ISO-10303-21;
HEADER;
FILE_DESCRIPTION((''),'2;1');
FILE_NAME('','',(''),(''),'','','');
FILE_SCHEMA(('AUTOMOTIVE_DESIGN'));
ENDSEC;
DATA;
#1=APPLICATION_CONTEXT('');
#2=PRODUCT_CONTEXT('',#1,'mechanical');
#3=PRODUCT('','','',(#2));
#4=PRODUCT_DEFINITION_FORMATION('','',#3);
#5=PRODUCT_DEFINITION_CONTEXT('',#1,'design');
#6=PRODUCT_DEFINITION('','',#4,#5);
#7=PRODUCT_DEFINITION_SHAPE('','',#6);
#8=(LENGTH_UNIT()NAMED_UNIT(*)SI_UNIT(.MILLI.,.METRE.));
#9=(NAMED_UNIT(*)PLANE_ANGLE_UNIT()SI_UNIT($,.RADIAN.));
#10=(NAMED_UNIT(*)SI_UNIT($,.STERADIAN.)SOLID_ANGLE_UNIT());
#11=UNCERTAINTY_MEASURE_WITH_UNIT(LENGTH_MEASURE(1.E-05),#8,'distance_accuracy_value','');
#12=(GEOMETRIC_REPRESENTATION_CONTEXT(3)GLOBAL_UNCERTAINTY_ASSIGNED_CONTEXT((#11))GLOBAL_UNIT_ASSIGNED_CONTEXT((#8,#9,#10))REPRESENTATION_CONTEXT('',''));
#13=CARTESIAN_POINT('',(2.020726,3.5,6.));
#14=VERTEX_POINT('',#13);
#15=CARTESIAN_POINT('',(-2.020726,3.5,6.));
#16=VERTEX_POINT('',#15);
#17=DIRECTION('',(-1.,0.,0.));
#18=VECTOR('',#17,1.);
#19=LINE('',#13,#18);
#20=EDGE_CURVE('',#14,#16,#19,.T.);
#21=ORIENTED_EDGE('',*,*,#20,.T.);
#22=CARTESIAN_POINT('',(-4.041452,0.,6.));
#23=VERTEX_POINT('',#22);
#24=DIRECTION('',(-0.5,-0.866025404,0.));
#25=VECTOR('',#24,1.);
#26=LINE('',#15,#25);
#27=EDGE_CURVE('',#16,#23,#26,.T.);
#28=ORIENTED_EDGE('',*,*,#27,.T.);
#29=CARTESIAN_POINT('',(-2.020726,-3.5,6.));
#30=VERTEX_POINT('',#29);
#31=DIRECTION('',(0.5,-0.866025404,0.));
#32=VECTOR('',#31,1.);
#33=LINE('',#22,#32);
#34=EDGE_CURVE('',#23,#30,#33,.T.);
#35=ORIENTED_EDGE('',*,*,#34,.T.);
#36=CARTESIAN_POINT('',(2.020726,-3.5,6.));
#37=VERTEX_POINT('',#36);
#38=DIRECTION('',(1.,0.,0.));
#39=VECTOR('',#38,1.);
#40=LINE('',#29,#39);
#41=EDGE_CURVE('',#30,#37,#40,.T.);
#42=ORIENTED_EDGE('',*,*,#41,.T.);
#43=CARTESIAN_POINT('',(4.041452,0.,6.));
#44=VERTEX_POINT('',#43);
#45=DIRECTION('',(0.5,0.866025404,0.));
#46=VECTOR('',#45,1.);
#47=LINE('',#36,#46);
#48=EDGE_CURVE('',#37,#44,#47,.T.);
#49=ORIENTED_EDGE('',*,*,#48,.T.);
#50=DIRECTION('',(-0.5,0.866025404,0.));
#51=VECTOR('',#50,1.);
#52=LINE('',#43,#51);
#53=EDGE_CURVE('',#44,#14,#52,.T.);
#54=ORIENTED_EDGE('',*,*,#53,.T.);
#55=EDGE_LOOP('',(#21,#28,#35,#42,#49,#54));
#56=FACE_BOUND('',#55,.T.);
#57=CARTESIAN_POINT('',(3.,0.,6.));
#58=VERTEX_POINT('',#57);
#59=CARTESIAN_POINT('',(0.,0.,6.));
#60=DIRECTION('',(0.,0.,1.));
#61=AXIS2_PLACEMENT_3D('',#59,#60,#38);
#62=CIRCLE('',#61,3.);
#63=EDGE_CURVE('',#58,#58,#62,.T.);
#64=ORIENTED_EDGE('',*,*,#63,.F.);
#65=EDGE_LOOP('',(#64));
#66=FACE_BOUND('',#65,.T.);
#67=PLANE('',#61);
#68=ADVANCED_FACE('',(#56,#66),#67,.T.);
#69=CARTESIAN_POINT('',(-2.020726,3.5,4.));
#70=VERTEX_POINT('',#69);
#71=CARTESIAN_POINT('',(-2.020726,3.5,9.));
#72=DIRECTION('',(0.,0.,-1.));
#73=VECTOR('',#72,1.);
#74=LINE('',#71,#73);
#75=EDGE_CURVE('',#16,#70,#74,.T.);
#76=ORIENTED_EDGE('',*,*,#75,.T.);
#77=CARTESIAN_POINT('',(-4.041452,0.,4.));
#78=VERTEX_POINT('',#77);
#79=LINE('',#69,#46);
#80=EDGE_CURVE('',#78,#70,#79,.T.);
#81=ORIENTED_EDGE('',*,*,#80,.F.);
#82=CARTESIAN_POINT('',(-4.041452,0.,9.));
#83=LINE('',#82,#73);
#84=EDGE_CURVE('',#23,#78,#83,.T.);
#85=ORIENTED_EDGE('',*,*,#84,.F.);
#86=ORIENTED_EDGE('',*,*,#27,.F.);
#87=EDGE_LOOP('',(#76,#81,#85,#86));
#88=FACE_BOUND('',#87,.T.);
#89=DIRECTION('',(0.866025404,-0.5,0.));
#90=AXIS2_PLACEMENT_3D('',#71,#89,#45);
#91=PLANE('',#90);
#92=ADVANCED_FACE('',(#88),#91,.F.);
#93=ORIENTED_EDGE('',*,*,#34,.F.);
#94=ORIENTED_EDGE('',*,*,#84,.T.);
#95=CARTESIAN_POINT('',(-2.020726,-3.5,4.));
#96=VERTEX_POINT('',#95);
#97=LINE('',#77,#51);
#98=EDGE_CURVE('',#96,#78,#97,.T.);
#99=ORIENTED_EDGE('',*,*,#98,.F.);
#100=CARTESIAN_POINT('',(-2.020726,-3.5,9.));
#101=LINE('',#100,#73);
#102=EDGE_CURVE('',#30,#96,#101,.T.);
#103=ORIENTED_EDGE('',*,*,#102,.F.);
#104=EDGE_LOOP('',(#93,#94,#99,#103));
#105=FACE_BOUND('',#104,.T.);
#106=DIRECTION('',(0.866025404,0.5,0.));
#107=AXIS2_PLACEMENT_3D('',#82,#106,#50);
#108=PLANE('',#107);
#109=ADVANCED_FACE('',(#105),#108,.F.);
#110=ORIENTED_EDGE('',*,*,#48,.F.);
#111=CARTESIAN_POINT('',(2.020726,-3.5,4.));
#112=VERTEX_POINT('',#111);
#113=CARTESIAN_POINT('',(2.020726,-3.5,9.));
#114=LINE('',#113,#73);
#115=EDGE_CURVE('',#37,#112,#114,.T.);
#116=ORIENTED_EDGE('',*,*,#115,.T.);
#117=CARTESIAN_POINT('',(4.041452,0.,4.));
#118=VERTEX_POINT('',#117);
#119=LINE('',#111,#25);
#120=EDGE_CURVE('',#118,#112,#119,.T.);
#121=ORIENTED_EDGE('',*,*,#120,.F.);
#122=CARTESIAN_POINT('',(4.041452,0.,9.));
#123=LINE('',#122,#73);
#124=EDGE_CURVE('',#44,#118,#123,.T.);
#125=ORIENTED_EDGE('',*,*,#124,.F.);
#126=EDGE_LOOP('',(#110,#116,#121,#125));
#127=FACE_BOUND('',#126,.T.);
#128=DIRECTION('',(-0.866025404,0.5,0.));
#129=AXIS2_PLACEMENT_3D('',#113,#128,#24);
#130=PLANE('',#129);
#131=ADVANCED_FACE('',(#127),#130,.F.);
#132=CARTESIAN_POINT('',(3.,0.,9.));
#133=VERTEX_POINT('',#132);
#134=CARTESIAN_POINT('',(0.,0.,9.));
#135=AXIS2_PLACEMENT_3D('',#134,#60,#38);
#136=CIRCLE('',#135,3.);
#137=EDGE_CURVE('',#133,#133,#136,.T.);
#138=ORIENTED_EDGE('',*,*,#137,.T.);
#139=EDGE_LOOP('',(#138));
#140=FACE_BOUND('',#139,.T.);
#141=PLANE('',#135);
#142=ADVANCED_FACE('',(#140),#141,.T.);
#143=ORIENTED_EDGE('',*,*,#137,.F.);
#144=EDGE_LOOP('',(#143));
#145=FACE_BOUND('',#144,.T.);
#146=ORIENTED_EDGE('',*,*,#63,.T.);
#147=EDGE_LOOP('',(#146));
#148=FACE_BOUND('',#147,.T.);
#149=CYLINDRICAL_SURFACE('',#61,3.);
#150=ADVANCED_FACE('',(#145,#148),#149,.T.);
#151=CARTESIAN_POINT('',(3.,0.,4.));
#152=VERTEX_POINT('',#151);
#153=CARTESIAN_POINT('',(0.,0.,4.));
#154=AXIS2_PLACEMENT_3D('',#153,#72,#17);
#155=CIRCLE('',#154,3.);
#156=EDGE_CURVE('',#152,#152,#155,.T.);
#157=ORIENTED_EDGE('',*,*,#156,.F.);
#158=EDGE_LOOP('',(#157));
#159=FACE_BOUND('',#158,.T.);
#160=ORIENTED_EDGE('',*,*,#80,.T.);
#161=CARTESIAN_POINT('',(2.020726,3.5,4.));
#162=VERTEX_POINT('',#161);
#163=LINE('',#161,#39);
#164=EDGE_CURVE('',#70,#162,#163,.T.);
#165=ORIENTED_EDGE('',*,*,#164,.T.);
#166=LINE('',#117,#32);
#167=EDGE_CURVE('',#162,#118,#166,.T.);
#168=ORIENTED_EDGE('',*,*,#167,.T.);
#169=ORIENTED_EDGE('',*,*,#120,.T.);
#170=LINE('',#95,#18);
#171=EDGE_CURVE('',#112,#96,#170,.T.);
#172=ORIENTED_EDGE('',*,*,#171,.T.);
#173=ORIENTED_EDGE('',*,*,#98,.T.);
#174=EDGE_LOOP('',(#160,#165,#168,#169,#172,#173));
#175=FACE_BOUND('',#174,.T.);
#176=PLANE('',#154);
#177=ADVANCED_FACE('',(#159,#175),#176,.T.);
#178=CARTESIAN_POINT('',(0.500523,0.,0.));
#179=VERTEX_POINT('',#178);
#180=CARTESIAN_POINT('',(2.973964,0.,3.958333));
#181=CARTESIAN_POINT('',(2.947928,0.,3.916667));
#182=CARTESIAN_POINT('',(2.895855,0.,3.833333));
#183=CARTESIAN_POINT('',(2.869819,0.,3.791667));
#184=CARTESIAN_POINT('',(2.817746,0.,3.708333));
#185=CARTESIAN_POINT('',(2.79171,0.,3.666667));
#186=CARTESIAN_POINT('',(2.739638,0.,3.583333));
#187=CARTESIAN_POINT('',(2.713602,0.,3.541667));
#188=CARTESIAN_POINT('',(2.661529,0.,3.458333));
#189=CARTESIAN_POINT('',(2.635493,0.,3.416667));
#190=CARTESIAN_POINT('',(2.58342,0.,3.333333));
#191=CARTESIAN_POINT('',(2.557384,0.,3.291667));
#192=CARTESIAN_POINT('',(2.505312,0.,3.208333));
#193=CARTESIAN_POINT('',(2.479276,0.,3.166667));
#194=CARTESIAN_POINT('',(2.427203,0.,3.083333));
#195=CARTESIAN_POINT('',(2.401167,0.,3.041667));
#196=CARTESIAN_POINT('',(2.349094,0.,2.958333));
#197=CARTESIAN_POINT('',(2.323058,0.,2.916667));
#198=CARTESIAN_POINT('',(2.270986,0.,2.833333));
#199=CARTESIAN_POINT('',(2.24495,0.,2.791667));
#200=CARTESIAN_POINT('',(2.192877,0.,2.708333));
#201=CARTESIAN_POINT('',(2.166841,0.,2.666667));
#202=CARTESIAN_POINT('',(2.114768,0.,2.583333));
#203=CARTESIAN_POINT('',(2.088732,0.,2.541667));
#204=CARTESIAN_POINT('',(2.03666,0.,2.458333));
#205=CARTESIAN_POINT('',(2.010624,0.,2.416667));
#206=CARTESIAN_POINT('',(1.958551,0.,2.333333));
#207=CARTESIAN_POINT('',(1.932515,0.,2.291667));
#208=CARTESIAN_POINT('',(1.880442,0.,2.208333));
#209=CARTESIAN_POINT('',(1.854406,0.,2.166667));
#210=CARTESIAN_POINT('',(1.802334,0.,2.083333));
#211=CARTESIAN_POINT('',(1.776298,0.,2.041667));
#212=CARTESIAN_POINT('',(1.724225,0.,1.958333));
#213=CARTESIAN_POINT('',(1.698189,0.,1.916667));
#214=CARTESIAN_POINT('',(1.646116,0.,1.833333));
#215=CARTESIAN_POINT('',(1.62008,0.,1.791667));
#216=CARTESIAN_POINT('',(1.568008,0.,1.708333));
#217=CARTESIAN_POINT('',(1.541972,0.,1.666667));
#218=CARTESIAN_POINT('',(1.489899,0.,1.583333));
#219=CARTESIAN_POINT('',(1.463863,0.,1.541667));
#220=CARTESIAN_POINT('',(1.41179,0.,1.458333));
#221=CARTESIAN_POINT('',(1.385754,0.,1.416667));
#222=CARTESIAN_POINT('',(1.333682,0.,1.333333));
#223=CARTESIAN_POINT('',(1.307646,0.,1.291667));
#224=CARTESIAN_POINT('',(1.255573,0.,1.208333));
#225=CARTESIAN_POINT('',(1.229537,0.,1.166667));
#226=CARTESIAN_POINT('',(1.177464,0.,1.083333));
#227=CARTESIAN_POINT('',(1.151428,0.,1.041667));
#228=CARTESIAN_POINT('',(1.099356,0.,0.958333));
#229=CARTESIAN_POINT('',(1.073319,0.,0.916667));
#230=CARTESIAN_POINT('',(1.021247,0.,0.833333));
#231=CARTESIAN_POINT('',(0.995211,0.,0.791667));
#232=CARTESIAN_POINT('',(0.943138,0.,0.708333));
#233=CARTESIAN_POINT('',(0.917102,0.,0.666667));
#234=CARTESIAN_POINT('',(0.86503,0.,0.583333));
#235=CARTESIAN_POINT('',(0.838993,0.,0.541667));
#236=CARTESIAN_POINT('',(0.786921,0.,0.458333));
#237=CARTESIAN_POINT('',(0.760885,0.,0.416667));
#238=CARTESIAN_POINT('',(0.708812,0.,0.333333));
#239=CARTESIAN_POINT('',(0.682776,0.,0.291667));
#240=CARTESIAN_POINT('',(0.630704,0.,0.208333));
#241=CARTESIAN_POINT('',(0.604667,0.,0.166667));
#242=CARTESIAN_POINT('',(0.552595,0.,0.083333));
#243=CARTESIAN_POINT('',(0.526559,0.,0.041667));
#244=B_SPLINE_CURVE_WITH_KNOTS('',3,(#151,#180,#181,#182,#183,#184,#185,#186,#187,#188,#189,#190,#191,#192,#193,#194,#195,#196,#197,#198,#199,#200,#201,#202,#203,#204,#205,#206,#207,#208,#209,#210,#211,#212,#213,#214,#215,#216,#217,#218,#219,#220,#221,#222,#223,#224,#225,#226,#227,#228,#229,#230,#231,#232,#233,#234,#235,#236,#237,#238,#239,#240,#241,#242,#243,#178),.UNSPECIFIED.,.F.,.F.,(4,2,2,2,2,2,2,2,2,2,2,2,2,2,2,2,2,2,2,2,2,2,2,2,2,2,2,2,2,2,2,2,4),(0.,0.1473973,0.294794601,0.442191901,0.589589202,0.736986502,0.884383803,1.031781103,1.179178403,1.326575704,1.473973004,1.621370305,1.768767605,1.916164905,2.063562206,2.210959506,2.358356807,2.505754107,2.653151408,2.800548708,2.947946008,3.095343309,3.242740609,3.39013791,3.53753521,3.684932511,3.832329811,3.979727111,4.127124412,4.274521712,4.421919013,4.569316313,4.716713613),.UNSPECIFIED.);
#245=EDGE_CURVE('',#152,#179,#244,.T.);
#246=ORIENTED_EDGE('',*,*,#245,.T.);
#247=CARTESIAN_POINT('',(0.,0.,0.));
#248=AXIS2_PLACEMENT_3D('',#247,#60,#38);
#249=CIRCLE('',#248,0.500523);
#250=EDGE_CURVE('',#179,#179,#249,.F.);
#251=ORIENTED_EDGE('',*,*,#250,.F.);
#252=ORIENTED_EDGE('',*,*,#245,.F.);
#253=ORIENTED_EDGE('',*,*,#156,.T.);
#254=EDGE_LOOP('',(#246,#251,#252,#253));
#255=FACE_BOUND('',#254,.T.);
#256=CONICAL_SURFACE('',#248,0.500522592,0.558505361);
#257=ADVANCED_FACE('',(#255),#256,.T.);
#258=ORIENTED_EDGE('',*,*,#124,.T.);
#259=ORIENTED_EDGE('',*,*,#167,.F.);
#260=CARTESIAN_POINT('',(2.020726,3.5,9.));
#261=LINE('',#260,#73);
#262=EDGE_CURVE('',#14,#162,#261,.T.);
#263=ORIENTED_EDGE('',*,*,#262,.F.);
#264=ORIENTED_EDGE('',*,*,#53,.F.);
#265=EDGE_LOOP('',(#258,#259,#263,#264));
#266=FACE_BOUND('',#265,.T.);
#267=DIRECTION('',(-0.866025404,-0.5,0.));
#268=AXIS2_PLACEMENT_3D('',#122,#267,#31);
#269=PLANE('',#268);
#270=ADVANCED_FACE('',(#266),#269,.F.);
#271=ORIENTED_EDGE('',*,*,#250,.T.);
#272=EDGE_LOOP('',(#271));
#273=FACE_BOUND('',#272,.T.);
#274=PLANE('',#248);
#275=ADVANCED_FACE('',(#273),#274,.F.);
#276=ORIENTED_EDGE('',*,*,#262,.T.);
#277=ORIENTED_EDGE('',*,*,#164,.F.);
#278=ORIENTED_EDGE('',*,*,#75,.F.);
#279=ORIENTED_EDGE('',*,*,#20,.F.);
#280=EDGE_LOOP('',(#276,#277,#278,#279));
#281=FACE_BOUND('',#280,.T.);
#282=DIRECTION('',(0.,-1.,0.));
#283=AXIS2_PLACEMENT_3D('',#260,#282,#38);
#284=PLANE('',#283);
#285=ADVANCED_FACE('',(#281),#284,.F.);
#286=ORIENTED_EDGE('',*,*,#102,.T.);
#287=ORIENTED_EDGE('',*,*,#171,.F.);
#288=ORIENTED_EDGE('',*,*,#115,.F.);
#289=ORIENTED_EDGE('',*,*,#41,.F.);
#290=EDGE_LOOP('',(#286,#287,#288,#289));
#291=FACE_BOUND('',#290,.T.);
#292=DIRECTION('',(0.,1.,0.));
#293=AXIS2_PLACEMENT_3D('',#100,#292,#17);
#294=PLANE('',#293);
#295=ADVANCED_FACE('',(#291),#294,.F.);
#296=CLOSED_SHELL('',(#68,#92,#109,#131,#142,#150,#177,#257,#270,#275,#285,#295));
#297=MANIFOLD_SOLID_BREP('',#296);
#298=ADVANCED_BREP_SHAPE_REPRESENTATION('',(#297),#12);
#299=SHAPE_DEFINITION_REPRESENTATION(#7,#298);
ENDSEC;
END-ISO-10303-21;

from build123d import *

# Parameters (mm, degrees)
BOSS_EXTRU_1_DEPTH      = 9
ESQUISSE2_W             = 19.623971562
ESQUISSE2_H             = 15.534154535
ESQUISSE2_R             = 3
ENL_V_MAT_EXTRU_1_DEPTH = 3
ENL_V_START             = -4
ESQUISSE3_W             = 11.267201257
ESQUISSE3_H             = 13.961169169
ESQUISSE3_R             = 3
ENL_V_MAT_EXTRU_2_DEPTH = 4
CHANFREIN1_SIZE         = 4
CHANFREIN1_SIZE_2       = 2.499477408


with BuildPart() as part:
    # Esquisse1 → Boss.-Extru.1 (new body)
    with BuildSketch(Plane.XY):
        Polygon((4.041451884, 0), (2.020725942, 3.5), (-2.020725942, 3.5), (-4.041451884, 0), (-2.020725942, -3.5), (2.020725942, -3.5), align=None)
    extrude(amount=BOSS_EXTRU_1_DEPTH)

    # Esquisse2 → Enlèv. mat.-Extru.1 (cut)
    with BuildSketch(Plane.XY.offset(9)):
        with Locations((0.327116653, -1.544441398)):
            Rectangle(ESQUISSE2_W, ESQUISSE2_H)
        Circle(ESQUISSE2_R, mode=Mode.SUBTRACT)
    extrude(amount=-ENL_V_MAT_EXTRU_1_DEPTH, mode=Mode.SUBTRACT)

    # Esquisse3 → Enlèv. mat.-Extru.2 (cut)
    with BuildSketch(Plane(origin=(0, 0, 0), x_dir=(-1, 0, 0), z_dir=(0, 0, -1)).offset(ENL_V_START)):
        with Locations((0.009770186, 0.039262349)):
            Rectangle(ESQUISSE3_W, ESQUISSE3_H)
        with Locations(Location((0, 0, 0), (0, 0, 180))):
            Circle(ESQUISSE3_R, mode=Mode.SUBTRACT)
    extrude(amount=ENL_V_MAT_EXTRU_2_DEPTH, mode=Mode.SUBTRACT)

    # Chanfrein1
    # the kernel refuses this chamfer: 4, 2.499477408 mm, written as the material it takes off along each edge
    with BuildSketch(Plane(origin=(0, 0, 0), x_dir=(1, 0, 0), z_dir=(0, 1, 0))) as chanfrein1_piece_1_section:
        Polygon((3, -CHANFREIN1_SIZE), (3 - CHANFREIN1_SIZE_2, 0), (3, 0), align=None)
    chanfrein1_piece_1 = revolve(axis=Axis((0, 0, 0), (0, 0, -1)), mode=Mode.PRIVATE)
    chanfrein1_piece_1 = split(chanfrein1_piece_1, bisect_by=Plane(origin=(-1.744026904, 0, 4), z_dir=(0, 0, -1)), keep=Keep.TOP, mode=Mode.PRIVATE)
    add(chanfrein1_piece_1, mode=Mode.SUBTRACT)


solid = part.part
